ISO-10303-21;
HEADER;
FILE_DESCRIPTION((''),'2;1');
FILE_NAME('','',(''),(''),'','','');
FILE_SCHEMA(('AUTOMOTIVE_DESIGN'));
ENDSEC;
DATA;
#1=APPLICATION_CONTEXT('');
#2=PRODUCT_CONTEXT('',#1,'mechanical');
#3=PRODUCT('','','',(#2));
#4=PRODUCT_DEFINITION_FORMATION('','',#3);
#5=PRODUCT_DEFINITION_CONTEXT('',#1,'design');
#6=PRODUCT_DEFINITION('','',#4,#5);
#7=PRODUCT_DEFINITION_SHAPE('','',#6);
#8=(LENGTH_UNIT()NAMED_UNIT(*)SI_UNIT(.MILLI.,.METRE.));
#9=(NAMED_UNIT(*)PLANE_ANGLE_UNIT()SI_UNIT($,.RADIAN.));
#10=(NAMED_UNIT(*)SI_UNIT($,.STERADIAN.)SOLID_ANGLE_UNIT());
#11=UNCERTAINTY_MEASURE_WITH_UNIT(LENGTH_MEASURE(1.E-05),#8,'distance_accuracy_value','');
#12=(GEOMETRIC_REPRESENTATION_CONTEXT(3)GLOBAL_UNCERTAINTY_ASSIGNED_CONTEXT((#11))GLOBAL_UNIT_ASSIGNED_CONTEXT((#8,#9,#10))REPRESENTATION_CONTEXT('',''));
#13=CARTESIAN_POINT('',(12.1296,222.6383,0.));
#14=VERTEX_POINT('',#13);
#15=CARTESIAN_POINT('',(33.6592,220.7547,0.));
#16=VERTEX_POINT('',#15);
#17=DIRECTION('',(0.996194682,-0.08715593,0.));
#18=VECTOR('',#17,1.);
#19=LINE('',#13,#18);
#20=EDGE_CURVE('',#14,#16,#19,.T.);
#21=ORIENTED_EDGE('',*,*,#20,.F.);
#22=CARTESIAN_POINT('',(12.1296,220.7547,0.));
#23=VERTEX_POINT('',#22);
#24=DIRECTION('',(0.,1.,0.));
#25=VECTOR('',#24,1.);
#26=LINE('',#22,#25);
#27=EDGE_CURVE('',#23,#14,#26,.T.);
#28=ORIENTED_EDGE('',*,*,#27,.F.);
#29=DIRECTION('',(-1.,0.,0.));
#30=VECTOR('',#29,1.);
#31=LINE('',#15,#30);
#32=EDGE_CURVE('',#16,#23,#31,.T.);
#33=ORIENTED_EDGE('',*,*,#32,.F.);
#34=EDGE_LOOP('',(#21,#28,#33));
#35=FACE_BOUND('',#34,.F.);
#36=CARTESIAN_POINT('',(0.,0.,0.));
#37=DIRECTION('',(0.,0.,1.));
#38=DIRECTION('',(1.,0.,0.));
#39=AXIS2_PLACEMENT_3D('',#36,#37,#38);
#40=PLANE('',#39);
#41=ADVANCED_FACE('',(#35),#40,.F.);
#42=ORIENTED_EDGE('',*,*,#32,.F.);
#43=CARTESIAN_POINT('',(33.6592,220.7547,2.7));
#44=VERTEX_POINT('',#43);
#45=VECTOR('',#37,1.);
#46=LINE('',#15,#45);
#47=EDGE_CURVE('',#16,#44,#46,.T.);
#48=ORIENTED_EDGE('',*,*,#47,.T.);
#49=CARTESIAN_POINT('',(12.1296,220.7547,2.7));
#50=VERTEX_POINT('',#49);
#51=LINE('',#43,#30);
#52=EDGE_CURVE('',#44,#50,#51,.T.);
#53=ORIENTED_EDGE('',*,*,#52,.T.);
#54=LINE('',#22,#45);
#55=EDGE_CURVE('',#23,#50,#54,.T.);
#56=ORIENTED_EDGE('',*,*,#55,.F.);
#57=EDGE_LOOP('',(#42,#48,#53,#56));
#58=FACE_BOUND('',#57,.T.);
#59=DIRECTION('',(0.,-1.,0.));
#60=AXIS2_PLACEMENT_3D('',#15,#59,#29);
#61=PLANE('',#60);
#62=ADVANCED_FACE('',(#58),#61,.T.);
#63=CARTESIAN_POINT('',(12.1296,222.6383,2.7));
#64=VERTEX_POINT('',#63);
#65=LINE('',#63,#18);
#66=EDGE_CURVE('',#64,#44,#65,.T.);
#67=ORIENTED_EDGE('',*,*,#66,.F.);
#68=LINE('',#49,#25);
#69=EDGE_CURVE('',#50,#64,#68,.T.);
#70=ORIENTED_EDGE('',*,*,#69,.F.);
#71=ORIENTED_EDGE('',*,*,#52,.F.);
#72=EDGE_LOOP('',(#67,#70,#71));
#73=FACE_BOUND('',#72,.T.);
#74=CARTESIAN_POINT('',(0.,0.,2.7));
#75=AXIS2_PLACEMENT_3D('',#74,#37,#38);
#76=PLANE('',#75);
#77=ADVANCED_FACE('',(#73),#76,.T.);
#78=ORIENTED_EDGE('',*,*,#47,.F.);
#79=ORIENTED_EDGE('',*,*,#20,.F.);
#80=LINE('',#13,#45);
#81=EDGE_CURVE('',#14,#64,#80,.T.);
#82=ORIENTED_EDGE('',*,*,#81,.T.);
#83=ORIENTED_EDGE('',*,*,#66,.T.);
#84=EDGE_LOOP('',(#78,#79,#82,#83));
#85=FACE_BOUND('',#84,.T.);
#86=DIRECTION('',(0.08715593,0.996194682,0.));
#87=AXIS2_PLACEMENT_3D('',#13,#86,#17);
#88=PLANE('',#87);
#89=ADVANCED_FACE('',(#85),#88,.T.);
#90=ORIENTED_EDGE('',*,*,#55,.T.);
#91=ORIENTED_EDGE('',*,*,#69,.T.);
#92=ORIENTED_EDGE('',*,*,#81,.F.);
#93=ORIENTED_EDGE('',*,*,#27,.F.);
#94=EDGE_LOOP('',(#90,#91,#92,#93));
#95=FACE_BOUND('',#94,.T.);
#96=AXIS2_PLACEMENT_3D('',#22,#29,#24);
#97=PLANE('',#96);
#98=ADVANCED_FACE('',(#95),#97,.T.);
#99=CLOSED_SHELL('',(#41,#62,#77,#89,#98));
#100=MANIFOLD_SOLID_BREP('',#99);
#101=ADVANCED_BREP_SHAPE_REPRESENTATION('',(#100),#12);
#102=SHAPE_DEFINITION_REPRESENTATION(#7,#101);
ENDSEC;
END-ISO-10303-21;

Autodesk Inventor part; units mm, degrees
ref_plane "YZ Plane" through (0, 0, 0) normal (1, 0, 0) x (0, 1, 0)
ref_plane "XZ Plane" through (0, 0, 0) normal (0, 1, 0) x (-1, 0, 0)
ref_plane "XY Plane" through (0, 0, 0) normal (0, 0, 1) x (1, 0, 0)
sketch "Sketch1" plane through (0, 0, 0) normal (0, 0, 1) x (1, 0, 0)
  line L0 (12.1296, 222.6383) -> (33.6592, 220.7547)
  line L1 (12.1296, 222.6383) -> (39.6219, 222.6383) construction
  line L2 (33.6592, 220.7547) -> (12.1296, 220.7547)
  line L3 (12.1296, 220.7547) -> (12.1296, 222.6383)
  point P0 (0, 0)
  dimension "d2" = 5
  dimension "d14" = 1.8836
extrude "Extrusion1" add sketch "Sketch1" along normal blind 2.7
properties part number "wedge"
